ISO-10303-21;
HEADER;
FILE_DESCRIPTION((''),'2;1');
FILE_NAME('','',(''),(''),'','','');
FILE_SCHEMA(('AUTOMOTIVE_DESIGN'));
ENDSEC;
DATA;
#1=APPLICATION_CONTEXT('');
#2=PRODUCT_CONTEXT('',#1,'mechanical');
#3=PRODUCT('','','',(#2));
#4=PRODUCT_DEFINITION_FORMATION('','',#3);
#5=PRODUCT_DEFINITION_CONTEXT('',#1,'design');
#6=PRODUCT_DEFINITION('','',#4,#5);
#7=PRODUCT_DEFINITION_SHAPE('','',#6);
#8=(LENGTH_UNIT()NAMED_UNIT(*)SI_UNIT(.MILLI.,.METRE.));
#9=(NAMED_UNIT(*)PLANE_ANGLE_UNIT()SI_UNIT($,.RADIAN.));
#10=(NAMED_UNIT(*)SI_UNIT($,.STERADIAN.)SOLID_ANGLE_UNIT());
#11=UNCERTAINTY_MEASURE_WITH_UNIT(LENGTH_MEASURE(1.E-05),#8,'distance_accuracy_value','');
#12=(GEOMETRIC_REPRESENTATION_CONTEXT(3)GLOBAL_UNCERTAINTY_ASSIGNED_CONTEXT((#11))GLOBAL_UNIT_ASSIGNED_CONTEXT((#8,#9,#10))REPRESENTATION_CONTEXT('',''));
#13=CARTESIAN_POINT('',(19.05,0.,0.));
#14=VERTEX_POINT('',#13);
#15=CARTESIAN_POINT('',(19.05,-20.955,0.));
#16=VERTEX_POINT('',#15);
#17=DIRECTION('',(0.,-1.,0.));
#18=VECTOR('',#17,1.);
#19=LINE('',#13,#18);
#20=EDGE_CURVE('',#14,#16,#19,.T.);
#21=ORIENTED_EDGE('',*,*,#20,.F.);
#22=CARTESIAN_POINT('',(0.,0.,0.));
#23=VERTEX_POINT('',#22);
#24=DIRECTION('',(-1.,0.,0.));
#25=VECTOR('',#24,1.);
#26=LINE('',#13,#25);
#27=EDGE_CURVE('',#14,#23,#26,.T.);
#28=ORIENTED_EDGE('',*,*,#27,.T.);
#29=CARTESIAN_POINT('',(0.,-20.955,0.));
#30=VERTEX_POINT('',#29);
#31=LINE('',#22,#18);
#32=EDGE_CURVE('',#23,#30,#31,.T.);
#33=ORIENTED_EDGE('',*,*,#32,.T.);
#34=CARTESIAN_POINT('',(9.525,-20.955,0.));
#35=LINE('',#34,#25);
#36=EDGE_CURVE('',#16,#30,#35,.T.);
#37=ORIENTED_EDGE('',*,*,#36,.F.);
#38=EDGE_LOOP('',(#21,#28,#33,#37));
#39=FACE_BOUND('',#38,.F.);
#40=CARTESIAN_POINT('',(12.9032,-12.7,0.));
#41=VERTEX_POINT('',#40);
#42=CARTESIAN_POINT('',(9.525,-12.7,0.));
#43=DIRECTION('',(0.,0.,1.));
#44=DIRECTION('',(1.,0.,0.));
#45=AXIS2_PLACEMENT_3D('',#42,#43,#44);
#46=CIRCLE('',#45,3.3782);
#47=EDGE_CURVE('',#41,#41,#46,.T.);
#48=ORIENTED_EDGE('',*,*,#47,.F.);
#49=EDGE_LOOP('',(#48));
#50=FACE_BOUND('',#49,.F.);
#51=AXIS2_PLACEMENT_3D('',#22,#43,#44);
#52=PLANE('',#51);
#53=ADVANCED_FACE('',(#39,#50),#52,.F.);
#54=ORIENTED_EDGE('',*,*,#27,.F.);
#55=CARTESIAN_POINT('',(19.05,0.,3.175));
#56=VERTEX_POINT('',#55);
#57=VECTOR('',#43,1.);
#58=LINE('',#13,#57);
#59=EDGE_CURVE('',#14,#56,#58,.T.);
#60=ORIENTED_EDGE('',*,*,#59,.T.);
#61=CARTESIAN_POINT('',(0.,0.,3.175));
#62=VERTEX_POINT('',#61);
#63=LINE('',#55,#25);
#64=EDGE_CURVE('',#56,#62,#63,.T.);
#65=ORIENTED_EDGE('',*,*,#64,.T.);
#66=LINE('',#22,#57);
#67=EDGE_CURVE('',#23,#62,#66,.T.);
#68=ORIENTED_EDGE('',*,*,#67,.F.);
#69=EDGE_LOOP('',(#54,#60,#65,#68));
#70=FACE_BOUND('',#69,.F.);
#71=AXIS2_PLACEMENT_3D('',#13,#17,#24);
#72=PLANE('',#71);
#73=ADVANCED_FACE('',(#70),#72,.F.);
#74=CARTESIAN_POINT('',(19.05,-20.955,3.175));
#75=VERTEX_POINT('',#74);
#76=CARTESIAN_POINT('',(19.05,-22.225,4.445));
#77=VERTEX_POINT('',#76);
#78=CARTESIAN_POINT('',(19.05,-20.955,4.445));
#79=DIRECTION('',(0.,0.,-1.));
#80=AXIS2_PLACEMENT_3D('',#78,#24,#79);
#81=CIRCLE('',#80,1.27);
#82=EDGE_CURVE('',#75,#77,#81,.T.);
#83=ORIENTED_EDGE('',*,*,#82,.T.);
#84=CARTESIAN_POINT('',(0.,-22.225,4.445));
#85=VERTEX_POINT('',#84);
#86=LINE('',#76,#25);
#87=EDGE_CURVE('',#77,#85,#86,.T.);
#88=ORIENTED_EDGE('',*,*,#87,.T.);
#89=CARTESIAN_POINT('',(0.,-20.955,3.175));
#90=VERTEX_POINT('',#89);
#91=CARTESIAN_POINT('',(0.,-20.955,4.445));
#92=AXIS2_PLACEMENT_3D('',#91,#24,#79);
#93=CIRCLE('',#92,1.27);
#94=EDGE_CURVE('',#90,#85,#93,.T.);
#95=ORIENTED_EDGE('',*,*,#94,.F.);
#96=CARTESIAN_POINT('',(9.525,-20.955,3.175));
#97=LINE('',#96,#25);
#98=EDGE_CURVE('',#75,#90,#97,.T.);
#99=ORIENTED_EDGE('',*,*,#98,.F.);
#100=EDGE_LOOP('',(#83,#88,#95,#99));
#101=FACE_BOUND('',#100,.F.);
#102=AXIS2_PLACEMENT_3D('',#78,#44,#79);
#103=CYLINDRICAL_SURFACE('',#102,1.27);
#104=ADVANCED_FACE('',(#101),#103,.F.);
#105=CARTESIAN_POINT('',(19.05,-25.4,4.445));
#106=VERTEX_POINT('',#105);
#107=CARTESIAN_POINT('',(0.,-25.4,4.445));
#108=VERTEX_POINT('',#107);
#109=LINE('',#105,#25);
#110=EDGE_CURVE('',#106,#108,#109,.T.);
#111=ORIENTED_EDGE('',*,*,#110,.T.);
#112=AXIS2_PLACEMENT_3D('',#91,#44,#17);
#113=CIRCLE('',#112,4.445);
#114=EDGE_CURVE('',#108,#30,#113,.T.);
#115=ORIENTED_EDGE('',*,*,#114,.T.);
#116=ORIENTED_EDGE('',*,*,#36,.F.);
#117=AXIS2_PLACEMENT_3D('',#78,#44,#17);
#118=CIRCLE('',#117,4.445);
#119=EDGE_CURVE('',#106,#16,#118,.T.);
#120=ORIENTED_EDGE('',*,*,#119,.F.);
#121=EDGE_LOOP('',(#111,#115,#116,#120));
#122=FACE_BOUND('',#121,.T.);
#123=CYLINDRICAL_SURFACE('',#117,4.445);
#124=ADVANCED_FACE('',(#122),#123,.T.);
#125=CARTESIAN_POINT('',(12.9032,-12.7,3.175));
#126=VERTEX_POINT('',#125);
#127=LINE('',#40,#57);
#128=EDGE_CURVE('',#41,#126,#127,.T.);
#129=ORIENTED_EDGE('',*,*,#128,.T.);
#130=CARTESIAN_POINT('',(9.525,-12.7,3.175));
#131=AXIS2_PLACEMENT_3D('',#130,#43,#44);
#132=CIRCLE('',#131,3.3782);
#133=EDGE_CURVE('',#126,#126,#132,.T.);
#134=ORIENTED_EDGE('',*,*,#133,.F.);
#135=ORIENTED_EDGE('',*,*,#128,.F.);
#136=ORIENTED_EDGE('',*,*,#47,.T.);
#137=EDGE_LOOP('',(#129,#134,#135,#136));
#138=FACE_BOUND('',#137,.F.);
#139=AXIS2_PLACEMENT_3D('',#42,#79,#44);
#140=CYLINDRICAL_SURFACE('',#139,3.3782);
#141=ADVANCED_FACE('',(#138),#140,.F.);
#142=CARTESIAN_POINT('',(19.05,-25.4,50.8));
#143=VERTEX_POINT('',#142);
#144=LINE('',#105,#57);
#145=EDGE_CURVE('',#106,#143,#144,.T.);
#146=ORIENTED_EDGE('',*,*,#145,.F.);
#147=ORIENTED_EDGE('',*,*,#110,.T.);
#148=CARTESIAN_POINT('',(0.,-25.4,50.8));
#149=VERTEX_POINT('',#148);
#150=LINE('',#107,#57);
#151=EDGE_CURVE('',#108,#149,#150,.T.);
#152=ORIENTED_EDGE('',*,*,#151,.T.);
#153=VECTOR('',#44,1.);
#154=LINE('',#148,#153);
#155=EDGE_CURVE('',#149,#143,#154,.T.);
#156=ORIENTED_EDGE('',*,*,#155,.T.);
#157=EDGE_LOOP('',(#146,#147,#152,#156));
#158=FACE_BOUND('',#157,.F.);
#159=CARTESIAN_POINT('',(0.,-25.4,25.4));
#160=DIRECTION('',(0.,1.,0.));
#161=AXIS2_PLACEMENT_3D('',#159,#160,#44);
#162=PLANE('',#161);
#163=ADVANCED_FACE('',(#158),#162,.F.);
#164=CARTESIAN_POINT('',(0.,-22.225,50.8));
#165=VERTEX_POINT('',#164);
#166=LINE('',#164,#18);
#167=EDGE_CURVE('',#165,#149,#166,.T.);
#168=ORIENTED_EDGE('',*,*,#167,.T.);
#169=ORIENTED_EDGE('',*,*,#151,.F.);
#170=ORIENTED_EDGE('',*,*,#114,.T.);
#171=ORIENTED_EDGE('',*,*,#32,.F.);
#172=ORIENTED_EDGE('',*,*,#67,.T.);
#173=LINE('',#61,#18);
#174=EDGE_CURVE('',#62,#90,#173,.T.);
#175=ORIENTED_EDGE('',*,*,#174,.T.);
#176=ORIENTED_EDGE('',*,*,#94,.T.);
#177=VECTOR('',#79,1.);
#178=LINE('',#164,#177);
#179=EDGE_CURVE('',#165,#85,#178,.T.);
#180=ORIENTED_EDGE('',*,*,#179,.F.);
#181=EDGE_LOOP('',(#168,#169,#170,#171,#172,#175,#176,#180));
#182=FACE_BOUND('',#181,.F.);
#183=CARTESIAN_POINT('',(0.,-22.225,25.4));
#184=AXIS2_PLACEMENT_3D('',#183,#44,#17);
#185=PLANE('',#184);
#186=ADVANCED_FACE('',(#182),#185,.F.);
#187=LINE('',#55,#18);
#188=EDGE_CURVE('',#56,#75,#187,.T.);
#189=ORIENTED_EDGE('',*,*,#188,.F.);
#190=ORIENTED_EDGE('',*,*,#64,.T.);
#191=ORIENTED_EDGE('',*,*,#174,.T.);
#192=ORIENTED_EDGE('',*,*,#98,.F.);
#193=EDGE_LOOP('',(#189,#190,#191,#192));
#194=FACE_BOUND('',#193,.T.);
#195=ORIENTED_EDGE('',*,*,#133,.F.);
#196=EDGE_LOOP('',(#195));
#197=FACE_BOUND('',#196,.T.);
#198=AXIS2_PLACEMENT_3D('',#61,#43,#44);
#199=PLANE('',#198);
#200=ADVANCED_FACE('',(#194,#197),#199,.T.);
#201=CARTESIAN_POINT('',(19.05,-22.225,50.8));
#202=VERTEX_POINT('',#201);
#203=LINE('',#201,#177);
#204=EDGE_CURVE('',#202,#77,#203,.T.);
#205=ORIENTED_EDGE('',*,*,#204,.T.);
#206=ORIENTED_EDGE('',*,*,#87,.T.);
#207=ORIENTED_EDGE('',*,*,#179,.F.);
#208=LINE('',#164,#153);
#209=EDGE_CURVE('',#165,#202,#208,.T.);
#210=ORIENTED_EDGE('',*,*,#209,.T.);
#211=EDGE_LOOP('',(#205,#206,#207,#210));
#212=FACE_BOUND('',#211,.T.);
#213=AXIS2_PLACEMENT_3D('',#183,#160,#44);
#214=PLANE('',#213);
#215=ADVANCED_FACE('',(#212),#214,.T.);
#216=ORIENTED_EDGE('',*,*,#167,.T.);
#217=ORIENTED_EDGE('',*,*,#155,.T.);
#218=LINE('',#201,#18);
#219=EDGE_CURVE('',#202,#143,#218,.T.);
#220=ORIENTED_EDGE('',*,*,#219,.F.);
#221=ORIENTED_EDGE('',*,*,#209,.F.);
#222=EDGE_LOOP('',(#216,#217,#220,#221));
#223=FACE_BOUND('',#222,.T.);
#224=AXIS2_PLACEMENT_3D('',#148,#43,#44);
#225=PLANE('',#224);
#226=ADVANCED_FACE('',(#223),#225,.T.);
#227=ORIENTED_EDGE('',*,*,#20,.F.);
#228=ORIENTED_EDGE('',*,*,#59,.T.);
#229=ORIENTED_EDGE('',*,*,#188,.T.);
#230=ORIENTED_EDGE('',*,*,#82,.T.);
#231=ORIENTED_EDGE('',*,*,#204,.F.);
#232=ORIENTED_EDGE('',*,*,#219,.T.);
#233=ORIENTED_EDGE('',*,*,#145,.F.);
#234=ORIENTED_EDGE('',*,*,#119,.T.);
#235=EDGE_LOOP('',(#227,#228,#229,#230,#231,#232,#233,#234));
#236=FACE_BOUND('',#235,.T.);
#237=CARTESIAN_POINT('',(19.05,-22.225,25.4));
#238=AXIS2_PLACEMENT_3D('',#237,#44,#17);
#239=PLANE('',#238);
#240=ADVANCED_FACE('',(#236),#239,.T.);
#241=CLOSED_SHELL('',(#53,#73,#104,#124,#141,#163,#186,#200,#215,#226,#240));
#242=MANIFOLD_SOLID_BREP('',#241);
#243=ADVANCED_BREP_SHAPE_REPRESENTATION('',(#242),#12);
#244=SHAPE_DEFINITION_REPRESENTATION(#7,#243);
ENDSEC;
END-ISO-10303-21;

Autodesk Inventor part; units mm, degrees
ref_plane "YZ Plane" through (0, 0, 0) normal (1, 0, 0) x (0, 1, 0)
ref_plane "XZ Plane" through (0, 0, 0) normal (0, 1, 0) x (-1, 0, 0)
ref_plane "XY Plane" through (0, 0, 0) normal (0, 0, 1) x (1, 0, 0)
sketch "Sketch1" plane through (0, 0, 0) normal (0, 0, 1) x (1, 0, 0)
  circle A0 centre (9.525, -12.7) radius 3.3782
  line L0 (19.05, 0) -> (0, 0)
  line L1 (0, 0) -> (0, -25.4)
  line L2 (19.05, -25.4) -> (0, -25.4)
  line L3 (19.05, 0) -> (19.05, -25.4)
extrude "Plate1" add sketch "Sketch1" along normal blind 3.175
sketch "Sketch2" plane through (19.05, -22.225, 0) normal (0, -1, 0) x (1, 0, 0)
  line L0 (-19.05, 0) -> (0, 0)
  line L1 (0, 0) -> (0, 25.4)
  line L2 (0, 25.4) -> (-19.05, 25.4)
  line L3 (-19.05, 25.4) -> (-19.05, 0)
edge flange "Flange1" height 25.4 angle 90 thickness 3.175 bend radius 1.27 thickness toward (0, -1, 0) relief straight relief width 3.175 relief depth 1.5875 edges at (9.525, -25.4, 3.175) wall of the first edge with corners at (0, -22.225, 0) (19.05, -22.225, 0) (19.05, -22.225, 25.4) (0, -22.225, 25.4)
bend "Bend1"
corner "Corner1"
sketch "Sketch3" plane through (0, -25.4, 25.4) normal (0, 0, 1) x (1, 0, 0)
  line L0 (0, 0) -> (19.05, 0) projected
  line L1 (19.05, 3.175) -> (19.05, 0) projected
  line L2 (0, 3.175) -> (19.05, 3.175) projected
  line L3 (0, 3.175) -> (0, 0) projected
  point P0 (0, 25.4)
extrude "Extrusion1" add sketch "Sketch3" along normal blind 25.4
equation "\"d1\" = BendReliefWidth"
equation "\"d2\" = BendReliefDepth"
equation "\"d3\" = MinimumRemnant"
equation "\"d4\" = BendRadius"
equation "\"d8\" = CornerReliefSize"
equation "\"d9\" = GapSize"
equation "\"d10\" = JacobiRadiusSize"
equation "\"BendRadius\" = Thickness"
equation "\"BendReliefWidth\" = Thickness"
equation "\"BendReliefDepth\" = 0.5 * Thickness"
equation "\"CornerReliefSize\" = 4 * Thickness"
equation "\"MinimumRemnant\" = 2 * Thickness"
equation "\"TransitionRadius\" = BendRadius"
equation "\"JacobiRadiusSize\" = Thickness"
equation "\"GapSize\" = Thickness"
equation "\"d0\" = BendRadius"
equation "\"Thickness\" = 3.175"
